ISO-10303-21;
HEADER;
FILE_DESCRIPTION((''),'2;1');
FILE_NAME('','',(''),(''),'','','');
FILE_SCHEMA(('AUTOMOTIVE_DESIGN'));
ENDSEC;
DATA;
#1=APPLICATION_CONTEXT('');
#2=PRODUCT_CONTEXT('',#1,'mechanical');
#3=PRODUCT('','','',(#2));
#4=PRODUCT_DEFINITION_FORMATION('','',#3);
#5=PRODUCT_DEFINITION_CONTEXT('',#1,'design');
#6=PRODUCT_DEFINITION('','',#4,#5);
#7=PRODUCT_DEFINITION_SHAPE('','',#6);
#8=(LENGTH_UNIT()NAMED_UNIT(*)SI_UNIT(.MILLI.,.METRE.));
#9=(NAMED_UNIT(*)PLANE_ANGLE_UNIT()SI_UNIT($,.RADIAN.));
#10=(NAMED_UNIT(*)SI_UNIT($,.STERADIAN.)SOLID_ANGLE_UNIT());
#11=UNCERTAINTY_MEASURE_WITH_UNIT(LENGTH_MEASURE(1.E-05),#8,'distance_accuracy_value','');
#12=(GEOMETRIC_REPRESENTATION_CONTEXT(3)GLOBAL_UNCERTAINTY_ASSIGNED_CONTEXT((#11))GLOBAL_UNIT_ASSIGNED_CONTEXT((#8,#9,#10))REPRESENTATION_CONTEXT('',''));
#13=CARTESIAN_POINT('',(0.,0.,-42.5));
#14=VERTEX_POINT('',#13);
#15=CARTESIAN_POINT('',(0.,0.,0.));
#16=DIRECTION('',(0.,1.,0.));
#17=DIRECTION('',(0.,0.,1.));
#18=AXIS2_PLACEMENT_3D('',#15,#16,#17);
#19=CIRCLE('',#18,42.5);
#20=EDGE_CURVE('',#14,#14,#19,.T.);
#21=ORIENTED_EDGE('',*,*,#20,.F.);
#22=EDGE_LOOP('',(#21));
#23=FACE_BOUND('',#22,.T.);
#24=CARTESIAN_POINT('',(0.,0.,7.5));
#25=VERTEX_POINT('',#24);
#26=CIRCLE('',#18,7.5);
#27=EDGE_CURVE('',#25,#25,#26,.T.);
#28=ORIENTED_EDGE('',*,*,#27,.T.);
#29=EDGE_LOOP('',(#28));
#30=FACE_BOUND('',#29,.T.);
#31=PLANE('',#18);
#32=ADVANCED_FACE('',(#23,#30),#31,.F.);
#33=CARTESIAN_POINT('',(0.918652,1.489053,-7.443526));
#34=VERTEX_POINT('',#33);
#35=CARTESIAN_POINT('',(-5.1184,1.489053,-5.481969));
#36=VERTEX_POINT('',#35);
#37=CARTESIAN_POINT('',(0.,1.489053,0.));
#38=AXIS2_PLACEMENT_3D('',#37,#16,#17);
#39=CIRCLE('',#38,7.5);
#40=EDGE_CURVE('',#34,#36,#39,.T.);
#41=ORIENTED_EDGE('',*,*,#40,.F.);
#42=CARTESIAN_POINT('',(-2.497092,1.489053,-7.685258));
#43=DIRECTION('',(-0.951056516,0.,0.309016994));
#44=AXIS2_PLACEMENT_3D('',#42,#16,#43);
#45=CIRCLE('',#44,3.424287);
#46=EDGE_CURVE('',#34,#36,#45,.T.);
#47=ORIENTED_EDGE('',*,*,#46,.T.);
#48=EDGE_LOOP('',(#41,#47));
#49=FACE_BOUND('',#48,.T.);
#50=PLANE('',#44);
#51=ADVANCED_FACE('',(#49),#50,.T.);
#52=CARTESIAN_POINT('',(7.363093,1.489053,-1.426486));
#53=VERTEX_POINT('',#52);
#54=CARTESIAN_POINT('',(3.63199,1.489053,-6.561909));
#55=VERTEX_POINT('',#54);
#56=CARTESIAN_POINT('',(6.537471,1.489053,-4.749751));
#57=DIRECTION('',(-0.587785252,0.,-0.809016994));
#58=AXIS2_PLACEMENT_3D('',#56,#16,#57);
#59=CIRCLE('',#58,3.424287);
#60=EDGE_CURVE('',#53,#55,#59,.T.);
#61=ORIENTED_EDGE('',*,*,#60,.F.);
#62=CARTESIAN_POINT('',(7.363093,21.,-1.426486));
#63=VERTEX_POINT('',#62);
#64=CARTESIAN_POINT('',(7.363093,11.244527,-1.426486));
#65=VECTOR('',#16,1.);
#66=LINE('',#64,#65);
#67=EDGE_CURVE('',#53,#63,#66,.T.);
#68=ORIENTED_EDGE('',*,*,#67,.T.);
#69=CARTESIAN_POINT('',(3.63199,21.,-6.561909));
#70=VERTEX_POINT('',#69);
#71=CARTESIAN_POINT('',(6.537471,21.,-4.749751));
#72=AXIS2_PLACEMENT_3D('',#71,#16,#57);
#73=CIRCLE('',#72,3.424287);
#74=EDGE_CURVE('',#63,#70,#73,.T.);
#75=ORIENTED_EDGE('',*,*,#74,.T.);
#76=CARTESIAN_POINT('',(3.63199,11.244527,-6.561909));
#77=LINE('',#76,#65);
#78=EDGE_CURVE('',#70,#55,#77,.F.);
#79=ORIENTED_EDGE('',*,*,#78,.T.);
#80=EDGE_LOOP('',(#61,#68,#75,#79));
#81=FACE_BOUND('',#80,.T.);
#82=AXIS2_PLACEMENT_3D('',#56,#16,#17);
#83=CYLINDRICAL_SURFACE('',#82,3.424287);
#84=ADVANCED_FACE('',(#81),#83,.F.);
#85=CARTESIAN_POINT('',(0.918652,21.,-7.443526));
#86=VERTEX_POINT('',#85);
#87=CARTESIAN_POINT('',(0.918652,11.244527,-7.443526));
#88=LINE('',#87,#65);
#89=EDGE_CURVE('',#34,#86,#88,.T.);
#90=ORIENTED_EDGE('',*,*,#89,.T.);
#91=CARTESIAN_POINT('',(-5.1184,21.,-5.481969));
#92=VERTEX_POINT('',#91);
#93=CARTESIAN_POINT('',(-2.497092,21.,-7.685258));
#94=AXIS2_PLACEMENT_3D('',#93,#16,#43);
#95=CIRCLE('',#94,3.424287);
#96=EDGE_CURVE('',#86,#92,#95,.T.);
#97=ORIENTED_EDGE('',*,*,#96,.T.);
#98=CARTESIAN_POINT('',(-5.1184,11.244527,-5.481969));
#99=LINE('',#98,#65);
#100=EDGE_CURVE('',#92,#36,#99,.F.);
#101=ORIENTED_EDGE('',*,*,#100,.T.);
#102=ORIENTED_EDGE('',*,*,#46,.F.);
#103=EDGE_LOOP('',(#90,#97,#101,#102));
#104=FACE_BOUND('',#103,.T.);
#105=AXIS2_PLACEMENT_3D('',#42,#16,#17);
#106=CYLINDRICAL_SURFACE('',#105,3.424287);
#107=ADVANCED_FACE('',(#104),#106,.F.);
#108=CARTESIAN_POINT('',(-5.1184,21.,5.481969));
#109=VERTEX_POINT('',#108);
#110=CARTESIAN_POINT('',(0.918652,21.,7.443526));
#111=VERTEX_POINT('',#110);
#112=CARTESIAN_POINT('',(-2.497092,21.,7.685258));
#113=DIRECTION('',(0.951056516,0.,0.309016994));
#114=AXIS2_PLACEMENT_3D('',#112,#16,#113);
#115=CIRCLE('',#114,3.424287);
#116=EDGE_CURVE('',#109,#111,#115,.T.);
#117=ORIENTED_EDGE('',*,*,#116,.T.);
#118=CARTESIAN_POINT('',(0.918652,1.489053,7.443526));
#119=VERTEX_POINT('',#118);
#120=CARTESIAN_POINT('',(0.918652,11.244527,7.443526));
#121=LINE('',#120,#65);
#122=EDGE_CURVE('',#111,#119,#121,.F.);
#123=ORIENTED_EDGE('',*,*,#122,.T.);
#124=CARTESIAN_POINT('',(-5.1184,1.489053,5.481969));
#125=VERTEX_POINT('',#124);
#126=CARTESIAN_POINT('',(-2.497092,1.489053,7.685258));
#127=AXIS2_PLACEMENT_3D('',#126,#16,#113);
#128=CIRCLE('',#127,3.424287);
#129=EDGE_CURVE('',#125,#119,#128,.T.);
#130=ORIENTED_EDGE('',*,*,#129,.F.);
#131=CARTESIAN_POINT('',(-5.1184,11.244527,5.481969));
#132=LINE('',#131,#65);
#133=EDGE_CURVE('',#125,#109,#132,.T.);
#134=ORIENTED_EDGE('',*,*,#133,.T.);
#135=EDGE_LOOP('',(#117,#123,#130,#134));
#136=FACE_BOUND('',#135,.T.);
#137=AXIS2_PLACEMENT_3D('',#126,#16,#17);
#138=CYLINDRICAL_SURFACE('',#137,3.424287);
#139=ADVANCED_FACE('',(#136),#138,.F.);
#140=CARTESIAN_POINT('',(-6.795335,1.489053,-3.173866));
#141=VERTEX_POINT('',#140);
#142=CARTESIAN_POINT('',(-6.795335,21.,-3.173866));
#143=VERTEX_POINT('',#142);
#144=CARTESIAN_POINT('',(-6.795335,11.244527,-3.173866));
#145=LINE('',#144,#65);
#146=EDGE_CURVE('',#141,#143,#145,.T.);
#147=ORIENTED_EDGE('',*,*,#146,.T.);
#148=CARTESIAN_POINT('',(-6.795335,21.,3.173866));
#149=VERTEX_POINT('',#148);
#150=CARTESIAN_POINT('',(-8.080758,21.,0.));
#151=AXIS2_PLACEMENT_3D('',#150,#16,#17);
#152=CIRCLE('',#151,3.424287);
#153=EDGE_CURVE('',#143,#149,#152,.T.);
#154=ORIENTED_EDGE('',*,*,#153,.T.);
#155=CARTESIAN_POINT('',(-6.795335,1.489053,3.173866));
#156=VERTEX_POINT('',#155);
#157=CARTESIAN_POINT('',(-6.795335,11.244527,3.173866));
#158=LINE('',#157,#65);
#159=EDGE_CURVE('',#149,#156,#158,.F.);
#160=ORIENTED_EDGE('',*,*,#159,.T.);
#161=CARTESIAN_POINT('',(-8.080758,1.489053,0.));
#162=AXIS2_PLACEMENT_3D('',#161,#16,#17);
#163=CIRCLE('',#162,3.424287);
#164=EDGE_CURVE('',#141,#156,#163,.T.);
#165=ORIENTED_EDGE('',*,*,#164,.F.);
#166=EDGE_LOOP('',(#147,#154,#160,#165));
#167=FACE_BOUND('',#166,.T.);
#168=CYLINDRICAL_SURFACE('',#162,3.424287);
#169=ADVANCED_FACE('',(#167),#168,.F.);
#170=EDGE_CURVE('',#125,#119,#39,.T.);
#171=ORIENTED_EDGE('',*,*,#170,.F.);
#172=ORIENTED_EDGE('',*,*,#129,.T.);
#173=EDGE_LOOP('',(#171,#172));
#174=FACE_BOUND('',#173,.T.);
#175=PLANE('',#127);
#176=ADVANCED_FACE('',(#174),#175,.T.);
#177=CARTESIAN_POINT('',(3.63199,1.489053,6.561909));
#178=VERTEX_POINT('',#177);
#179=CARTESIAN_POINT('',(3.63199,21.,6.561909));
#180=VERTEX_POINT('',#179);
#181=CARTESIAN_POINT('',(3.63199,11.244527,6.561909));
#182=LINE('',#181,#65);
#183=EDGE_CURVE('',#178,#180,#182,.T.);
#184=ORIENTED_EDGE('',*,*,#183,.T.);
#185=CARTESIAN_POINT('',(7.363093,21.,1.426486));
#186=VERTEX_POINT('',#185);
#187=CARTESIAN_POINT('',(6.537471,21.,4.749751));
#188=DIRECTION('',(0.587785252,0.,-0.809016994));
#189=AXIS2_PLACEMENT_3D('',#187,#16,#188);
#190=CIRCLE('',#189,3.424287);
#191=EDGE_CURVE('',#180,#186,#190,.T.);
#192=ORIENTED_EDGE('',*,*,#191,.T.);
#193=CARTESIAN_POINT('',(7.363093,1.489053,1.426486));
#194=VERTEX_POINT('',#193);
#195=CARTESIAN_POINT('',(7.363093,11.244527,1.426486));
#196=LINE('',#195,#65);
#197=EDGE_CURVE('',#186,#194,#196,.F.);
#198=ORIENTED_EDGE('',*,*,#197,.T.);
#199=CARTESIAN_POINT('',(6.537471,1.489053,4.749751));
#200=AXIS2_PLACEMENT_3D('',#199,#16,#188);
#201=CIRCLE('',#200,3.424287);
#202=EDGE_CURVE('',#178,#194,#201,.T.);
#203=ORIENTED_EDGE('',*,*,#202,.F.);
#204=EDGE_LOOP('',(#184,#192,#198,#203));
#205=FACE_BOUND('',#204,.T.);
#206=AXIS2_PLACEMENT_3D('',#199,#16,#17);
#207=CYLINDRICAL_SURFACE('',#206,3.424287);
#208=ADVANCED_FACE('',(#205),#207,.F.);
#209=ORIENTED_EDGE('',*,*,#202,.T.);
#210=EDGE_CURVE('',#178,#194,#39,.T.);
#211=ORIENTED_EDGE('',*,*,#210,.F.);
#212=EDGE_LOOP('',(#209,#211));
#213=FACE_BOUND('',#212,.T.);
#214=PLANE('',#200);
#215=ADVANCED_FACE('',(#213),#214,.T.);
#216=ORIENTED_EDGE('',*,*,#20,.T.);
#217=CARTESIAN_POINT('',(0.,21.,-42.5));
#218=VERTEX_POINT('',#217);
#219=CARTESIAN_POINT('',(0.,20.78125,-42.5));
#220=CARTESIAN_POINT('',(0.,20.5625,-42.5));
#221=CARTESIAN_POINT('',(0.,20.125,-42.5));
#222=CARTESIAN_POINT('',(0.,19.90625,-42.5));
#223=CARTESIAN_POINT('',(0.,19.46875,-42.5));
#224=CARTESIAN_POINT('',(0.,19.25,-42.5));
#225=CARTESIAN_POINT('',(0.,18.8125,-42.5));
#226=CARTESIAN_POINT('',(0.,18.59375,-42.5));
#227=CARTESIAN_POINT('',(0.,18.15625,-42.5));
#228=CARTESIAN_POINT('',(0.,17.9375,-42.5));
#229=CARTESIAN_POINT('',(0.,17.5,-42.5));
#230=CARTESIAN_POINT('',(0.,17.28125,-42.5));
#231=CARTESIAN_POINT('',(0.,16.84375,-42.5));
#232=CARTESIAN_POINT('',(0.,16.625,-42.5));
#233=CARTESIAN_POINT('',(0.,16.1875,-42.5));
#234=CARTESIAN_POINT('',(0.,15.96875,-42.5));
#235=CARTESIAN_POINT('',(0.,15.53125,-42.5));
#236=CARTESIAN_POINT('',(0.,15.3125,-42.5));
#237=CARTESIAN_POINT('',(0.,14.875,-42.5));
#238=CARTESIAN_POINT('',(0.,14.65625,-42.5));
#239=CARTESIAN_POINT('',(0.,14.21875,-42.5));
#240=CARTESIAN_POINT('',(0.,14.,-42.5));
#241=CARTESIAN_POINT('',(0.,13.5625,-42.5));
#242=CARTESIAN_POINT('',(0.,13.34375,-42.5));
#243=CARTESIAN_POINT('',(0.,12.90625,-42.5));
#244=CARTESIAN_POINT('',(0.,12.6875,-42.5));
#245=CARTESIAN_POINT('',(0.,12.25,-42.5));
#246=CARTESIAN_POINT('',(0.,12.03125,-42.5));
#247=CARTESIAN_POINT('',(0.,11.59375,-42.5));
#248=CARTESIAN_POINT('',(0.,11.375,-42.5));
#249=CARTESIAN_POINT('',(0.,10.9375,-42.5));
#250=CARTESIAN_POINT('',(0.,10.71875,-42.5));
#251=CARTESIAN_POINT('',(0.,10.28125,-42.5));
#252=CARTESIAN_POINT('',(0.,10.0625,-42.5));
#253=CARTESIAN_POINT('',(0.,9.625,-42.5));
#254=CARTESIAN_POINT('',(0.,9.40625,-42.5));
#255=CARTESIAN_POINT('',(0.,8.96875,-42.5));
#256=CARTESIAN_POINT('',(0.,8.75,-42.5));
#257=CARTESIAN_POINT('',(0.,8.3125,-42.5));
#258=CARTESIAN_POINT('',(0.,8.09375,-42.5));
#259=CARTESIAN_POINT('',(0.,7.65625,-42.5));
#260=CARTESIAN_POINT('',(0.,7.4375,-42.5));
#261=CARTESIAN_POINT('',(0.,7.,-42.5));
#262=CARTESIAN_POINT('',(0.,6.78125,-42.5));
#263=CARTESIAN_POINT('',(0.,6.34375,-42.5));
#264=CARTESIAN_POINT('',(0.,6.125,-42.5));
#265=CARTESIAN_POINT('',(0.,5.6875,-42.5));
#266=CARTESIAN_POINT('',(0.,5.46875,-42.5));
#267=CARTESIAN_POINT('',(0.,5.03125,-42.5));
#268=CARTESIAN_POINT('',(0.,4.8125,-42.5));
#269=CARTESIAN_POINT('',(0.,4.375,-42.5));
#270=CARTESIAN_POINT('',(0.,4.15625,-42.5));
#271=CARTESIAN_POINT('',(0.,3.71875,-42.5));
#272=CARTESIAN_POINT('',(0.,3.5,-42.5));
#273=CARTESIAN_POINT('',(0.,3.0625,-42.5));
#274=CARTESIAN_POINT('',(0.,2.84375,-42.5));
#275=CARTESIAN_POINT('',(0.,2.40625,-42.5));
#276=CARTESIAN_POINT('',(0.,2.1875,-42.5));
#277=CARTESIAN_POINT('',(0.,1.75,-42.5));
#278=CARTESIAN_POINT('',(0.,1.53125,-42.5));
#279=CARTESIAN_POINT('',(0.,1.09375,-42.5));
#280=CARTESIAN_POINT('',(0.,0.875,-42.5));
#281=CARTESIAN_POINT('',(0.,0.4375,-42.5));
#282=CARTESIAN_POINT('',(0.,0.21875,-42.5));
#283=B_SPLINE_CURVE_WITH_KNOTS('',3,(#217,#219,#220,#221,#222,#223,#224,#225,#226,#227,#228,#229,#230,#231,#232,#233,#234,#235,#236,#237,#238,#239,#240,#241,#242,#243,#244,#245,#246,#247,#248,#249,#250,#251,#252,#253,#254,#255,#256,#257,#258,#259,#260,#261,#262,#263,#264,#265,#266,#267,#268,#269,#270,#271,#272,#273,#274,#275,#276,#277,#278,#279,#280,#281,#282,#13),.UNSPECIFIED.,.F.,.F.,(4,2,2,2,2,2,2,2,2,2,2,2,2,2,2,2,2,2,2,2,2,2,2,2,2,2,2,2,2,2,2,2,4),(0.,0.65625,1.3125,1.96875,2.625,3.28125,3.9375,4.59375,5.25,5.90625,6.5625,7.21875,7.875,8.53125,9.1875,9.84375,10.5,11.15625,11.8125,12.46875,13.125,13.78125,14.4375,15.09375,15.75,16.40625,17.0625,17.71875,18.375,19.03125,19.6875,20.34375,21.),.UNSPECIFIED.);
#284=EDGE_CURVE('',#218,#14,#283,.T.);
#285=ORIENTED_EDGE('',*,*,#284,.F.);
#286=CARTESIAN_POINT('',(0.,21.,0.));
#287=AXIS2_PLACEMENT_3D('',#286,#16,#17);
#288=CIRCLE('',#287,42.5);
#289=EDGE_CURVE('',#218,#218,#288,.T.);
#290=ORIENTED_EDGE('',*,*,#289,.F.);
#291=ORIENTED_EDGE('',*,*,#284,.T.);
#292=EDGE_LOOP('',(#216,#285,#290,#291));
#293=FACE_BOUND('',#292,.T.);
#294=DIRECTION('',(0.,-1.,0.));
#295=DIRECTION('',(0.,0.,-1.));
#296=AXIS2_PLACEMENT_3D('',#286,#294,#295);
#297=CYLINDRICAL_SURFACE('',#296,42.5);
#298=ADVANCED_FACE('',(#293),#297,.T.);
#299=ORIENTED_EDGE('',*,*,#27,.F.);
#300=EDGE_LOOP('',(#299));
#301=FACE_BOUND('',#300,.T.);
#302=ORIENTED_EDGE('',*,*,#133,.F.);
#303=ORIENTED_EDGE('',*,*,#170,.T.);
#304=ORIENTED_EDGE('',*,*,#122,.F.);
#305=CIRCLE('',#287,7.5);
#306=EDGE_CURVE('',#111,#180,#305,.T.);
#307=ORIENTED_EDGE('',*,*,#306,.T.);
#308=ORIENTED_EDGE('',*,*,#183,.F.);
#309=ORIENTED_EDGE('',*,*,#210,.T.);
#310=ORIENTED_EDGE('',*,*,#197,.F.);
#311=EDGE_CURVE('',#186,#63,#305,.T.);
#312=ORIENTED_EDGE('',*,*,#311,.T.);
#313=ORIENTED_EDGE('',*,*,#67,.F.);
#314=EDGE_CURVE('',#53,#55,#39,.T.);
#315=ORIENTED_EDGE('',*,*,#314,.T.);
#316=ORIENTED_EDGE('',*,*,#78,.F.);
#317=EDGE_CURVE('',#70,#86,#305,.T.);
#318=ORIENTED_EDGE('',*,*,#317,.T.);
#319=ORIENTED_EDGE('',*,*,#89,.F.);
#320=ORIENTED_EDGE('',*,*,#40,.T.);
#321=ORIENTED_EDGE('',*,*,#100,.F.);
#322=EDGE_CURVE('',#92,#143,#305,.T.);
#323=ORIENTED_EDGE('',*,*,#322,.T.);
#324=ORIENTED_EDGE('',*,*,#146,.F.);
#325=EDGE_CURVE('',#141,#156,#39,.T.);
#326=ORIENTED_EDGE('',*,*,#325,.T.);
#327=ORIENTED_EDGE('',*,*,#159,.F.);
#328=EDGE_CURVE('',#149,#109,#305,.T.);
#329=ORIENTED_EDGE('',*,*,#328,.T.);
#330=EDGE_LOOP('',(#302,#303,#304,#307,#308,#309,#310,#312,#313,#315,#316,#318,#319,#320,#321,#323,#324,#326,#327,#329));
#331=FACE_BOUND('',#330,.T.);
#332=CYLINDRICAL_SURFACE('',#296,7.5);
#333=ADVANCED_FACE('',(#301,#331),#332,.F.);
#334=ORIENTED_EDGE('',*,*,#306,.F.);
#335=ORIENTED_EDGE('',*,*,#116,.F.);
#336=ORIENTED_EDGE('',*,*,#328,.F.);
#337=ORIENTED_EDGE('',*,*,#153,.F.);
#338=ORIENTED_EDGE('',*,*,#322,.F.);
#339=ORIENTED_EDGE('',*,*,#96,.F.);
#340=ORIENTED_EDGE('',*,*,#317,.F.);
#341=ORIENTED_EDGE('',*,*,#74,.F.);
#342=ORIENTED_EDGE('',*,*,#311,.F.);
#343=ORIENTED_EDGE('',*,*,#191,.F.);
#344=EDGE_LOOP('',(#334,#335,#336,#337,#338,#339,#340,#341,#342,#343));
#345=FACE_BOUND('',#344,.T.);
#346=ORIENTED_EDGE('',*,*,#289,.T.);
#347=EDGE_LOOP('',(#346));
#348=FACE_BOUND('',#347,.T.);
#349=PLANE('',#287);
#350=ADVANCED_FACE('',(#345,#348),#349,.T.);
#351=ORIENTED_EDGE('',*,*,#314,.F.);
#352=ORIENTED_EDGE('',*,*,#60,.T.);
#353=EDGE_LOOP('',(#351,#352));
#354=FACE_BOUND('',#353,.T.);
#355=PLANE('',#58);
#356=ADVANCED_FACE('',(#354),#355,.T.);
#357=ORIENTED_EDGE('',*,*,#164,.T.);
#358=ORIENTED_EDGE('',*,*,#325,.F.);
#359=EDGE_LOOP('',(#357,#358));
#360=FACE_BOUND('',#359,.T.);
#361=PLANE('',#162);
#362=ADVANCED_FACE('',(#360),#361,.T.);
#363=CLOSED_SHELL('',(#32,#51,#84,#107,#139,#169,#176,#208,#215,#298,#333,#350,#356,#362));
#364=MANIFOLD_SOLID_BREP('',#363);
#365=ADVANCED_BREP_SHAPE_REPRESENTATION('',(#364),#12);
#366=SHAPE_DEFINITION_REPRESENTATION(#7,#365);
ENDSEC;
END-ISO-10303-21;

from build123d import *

# Parameters (mm, degrees)
SKETCH1_R           = 42.5
BOSS_EXTRUDE1_DEPTH = 21
SKETCH2_R           = 7.5
CUT_EXTRUDE1_DEPTH  = 64.667102965
SKETCH3_R           = 3.424286573
CUT_EXTRUDE2_DEPTH  = 19.51094656
CIRPATTERN1_COUNT   = 5


with BuildPart() as part:
    # Sketch1 → Boss-Extrude1 (new body)
    with BuildSketch(Plane(origin=(0, 0, 0), x_dir=(1, 0, 0), z_dir=(0, 1, 0))):
        Circle(SKETCH1_R)
    extrude(amount=BOSS_EXTRUDE1_DEPTH)

    # Sketch2 → Cut-Extrude1 (cut, through all)
    with BuildSketch(Plane(origin=(0, 0, 0), x_dir=(1, 0, 0), z_dir=(0, 1, 0))):
        Circle(SKETCH2_R)
    extrude(amount=CUT_EXTRUDE1_DEPTH, mode=Mode.SUBTRACT)

    # Sketch3 → Cut-Extrude2 (cut)
    with BuildSketch(Plane(origin=(0, 21, 0), x_dir=(1, 0, 0), z_dir=(0, 1, 0))):
        with Locations((-8.080758313, 0)):
            Circle(SKETCH3_R)
    cut_extrude2 = extrude(amount=-CUT_EXTRUDE2_DEPTH, mode=Mode.SUBTRACT)

    # CirPattern1: Cut-Extrude2 ×5 about axis
    cirpattern1_axis = Axis((0, 0, 0), (0, 1, 0))
    for i in range(1, CIRPATTERN1_COUNT):
        add(cut_extrude2.rotate(cirpattern1_axis, i * 360 / CIRPATTERN1_COUNT), mode=Mode.SUBTRACT)


solid = part.part
